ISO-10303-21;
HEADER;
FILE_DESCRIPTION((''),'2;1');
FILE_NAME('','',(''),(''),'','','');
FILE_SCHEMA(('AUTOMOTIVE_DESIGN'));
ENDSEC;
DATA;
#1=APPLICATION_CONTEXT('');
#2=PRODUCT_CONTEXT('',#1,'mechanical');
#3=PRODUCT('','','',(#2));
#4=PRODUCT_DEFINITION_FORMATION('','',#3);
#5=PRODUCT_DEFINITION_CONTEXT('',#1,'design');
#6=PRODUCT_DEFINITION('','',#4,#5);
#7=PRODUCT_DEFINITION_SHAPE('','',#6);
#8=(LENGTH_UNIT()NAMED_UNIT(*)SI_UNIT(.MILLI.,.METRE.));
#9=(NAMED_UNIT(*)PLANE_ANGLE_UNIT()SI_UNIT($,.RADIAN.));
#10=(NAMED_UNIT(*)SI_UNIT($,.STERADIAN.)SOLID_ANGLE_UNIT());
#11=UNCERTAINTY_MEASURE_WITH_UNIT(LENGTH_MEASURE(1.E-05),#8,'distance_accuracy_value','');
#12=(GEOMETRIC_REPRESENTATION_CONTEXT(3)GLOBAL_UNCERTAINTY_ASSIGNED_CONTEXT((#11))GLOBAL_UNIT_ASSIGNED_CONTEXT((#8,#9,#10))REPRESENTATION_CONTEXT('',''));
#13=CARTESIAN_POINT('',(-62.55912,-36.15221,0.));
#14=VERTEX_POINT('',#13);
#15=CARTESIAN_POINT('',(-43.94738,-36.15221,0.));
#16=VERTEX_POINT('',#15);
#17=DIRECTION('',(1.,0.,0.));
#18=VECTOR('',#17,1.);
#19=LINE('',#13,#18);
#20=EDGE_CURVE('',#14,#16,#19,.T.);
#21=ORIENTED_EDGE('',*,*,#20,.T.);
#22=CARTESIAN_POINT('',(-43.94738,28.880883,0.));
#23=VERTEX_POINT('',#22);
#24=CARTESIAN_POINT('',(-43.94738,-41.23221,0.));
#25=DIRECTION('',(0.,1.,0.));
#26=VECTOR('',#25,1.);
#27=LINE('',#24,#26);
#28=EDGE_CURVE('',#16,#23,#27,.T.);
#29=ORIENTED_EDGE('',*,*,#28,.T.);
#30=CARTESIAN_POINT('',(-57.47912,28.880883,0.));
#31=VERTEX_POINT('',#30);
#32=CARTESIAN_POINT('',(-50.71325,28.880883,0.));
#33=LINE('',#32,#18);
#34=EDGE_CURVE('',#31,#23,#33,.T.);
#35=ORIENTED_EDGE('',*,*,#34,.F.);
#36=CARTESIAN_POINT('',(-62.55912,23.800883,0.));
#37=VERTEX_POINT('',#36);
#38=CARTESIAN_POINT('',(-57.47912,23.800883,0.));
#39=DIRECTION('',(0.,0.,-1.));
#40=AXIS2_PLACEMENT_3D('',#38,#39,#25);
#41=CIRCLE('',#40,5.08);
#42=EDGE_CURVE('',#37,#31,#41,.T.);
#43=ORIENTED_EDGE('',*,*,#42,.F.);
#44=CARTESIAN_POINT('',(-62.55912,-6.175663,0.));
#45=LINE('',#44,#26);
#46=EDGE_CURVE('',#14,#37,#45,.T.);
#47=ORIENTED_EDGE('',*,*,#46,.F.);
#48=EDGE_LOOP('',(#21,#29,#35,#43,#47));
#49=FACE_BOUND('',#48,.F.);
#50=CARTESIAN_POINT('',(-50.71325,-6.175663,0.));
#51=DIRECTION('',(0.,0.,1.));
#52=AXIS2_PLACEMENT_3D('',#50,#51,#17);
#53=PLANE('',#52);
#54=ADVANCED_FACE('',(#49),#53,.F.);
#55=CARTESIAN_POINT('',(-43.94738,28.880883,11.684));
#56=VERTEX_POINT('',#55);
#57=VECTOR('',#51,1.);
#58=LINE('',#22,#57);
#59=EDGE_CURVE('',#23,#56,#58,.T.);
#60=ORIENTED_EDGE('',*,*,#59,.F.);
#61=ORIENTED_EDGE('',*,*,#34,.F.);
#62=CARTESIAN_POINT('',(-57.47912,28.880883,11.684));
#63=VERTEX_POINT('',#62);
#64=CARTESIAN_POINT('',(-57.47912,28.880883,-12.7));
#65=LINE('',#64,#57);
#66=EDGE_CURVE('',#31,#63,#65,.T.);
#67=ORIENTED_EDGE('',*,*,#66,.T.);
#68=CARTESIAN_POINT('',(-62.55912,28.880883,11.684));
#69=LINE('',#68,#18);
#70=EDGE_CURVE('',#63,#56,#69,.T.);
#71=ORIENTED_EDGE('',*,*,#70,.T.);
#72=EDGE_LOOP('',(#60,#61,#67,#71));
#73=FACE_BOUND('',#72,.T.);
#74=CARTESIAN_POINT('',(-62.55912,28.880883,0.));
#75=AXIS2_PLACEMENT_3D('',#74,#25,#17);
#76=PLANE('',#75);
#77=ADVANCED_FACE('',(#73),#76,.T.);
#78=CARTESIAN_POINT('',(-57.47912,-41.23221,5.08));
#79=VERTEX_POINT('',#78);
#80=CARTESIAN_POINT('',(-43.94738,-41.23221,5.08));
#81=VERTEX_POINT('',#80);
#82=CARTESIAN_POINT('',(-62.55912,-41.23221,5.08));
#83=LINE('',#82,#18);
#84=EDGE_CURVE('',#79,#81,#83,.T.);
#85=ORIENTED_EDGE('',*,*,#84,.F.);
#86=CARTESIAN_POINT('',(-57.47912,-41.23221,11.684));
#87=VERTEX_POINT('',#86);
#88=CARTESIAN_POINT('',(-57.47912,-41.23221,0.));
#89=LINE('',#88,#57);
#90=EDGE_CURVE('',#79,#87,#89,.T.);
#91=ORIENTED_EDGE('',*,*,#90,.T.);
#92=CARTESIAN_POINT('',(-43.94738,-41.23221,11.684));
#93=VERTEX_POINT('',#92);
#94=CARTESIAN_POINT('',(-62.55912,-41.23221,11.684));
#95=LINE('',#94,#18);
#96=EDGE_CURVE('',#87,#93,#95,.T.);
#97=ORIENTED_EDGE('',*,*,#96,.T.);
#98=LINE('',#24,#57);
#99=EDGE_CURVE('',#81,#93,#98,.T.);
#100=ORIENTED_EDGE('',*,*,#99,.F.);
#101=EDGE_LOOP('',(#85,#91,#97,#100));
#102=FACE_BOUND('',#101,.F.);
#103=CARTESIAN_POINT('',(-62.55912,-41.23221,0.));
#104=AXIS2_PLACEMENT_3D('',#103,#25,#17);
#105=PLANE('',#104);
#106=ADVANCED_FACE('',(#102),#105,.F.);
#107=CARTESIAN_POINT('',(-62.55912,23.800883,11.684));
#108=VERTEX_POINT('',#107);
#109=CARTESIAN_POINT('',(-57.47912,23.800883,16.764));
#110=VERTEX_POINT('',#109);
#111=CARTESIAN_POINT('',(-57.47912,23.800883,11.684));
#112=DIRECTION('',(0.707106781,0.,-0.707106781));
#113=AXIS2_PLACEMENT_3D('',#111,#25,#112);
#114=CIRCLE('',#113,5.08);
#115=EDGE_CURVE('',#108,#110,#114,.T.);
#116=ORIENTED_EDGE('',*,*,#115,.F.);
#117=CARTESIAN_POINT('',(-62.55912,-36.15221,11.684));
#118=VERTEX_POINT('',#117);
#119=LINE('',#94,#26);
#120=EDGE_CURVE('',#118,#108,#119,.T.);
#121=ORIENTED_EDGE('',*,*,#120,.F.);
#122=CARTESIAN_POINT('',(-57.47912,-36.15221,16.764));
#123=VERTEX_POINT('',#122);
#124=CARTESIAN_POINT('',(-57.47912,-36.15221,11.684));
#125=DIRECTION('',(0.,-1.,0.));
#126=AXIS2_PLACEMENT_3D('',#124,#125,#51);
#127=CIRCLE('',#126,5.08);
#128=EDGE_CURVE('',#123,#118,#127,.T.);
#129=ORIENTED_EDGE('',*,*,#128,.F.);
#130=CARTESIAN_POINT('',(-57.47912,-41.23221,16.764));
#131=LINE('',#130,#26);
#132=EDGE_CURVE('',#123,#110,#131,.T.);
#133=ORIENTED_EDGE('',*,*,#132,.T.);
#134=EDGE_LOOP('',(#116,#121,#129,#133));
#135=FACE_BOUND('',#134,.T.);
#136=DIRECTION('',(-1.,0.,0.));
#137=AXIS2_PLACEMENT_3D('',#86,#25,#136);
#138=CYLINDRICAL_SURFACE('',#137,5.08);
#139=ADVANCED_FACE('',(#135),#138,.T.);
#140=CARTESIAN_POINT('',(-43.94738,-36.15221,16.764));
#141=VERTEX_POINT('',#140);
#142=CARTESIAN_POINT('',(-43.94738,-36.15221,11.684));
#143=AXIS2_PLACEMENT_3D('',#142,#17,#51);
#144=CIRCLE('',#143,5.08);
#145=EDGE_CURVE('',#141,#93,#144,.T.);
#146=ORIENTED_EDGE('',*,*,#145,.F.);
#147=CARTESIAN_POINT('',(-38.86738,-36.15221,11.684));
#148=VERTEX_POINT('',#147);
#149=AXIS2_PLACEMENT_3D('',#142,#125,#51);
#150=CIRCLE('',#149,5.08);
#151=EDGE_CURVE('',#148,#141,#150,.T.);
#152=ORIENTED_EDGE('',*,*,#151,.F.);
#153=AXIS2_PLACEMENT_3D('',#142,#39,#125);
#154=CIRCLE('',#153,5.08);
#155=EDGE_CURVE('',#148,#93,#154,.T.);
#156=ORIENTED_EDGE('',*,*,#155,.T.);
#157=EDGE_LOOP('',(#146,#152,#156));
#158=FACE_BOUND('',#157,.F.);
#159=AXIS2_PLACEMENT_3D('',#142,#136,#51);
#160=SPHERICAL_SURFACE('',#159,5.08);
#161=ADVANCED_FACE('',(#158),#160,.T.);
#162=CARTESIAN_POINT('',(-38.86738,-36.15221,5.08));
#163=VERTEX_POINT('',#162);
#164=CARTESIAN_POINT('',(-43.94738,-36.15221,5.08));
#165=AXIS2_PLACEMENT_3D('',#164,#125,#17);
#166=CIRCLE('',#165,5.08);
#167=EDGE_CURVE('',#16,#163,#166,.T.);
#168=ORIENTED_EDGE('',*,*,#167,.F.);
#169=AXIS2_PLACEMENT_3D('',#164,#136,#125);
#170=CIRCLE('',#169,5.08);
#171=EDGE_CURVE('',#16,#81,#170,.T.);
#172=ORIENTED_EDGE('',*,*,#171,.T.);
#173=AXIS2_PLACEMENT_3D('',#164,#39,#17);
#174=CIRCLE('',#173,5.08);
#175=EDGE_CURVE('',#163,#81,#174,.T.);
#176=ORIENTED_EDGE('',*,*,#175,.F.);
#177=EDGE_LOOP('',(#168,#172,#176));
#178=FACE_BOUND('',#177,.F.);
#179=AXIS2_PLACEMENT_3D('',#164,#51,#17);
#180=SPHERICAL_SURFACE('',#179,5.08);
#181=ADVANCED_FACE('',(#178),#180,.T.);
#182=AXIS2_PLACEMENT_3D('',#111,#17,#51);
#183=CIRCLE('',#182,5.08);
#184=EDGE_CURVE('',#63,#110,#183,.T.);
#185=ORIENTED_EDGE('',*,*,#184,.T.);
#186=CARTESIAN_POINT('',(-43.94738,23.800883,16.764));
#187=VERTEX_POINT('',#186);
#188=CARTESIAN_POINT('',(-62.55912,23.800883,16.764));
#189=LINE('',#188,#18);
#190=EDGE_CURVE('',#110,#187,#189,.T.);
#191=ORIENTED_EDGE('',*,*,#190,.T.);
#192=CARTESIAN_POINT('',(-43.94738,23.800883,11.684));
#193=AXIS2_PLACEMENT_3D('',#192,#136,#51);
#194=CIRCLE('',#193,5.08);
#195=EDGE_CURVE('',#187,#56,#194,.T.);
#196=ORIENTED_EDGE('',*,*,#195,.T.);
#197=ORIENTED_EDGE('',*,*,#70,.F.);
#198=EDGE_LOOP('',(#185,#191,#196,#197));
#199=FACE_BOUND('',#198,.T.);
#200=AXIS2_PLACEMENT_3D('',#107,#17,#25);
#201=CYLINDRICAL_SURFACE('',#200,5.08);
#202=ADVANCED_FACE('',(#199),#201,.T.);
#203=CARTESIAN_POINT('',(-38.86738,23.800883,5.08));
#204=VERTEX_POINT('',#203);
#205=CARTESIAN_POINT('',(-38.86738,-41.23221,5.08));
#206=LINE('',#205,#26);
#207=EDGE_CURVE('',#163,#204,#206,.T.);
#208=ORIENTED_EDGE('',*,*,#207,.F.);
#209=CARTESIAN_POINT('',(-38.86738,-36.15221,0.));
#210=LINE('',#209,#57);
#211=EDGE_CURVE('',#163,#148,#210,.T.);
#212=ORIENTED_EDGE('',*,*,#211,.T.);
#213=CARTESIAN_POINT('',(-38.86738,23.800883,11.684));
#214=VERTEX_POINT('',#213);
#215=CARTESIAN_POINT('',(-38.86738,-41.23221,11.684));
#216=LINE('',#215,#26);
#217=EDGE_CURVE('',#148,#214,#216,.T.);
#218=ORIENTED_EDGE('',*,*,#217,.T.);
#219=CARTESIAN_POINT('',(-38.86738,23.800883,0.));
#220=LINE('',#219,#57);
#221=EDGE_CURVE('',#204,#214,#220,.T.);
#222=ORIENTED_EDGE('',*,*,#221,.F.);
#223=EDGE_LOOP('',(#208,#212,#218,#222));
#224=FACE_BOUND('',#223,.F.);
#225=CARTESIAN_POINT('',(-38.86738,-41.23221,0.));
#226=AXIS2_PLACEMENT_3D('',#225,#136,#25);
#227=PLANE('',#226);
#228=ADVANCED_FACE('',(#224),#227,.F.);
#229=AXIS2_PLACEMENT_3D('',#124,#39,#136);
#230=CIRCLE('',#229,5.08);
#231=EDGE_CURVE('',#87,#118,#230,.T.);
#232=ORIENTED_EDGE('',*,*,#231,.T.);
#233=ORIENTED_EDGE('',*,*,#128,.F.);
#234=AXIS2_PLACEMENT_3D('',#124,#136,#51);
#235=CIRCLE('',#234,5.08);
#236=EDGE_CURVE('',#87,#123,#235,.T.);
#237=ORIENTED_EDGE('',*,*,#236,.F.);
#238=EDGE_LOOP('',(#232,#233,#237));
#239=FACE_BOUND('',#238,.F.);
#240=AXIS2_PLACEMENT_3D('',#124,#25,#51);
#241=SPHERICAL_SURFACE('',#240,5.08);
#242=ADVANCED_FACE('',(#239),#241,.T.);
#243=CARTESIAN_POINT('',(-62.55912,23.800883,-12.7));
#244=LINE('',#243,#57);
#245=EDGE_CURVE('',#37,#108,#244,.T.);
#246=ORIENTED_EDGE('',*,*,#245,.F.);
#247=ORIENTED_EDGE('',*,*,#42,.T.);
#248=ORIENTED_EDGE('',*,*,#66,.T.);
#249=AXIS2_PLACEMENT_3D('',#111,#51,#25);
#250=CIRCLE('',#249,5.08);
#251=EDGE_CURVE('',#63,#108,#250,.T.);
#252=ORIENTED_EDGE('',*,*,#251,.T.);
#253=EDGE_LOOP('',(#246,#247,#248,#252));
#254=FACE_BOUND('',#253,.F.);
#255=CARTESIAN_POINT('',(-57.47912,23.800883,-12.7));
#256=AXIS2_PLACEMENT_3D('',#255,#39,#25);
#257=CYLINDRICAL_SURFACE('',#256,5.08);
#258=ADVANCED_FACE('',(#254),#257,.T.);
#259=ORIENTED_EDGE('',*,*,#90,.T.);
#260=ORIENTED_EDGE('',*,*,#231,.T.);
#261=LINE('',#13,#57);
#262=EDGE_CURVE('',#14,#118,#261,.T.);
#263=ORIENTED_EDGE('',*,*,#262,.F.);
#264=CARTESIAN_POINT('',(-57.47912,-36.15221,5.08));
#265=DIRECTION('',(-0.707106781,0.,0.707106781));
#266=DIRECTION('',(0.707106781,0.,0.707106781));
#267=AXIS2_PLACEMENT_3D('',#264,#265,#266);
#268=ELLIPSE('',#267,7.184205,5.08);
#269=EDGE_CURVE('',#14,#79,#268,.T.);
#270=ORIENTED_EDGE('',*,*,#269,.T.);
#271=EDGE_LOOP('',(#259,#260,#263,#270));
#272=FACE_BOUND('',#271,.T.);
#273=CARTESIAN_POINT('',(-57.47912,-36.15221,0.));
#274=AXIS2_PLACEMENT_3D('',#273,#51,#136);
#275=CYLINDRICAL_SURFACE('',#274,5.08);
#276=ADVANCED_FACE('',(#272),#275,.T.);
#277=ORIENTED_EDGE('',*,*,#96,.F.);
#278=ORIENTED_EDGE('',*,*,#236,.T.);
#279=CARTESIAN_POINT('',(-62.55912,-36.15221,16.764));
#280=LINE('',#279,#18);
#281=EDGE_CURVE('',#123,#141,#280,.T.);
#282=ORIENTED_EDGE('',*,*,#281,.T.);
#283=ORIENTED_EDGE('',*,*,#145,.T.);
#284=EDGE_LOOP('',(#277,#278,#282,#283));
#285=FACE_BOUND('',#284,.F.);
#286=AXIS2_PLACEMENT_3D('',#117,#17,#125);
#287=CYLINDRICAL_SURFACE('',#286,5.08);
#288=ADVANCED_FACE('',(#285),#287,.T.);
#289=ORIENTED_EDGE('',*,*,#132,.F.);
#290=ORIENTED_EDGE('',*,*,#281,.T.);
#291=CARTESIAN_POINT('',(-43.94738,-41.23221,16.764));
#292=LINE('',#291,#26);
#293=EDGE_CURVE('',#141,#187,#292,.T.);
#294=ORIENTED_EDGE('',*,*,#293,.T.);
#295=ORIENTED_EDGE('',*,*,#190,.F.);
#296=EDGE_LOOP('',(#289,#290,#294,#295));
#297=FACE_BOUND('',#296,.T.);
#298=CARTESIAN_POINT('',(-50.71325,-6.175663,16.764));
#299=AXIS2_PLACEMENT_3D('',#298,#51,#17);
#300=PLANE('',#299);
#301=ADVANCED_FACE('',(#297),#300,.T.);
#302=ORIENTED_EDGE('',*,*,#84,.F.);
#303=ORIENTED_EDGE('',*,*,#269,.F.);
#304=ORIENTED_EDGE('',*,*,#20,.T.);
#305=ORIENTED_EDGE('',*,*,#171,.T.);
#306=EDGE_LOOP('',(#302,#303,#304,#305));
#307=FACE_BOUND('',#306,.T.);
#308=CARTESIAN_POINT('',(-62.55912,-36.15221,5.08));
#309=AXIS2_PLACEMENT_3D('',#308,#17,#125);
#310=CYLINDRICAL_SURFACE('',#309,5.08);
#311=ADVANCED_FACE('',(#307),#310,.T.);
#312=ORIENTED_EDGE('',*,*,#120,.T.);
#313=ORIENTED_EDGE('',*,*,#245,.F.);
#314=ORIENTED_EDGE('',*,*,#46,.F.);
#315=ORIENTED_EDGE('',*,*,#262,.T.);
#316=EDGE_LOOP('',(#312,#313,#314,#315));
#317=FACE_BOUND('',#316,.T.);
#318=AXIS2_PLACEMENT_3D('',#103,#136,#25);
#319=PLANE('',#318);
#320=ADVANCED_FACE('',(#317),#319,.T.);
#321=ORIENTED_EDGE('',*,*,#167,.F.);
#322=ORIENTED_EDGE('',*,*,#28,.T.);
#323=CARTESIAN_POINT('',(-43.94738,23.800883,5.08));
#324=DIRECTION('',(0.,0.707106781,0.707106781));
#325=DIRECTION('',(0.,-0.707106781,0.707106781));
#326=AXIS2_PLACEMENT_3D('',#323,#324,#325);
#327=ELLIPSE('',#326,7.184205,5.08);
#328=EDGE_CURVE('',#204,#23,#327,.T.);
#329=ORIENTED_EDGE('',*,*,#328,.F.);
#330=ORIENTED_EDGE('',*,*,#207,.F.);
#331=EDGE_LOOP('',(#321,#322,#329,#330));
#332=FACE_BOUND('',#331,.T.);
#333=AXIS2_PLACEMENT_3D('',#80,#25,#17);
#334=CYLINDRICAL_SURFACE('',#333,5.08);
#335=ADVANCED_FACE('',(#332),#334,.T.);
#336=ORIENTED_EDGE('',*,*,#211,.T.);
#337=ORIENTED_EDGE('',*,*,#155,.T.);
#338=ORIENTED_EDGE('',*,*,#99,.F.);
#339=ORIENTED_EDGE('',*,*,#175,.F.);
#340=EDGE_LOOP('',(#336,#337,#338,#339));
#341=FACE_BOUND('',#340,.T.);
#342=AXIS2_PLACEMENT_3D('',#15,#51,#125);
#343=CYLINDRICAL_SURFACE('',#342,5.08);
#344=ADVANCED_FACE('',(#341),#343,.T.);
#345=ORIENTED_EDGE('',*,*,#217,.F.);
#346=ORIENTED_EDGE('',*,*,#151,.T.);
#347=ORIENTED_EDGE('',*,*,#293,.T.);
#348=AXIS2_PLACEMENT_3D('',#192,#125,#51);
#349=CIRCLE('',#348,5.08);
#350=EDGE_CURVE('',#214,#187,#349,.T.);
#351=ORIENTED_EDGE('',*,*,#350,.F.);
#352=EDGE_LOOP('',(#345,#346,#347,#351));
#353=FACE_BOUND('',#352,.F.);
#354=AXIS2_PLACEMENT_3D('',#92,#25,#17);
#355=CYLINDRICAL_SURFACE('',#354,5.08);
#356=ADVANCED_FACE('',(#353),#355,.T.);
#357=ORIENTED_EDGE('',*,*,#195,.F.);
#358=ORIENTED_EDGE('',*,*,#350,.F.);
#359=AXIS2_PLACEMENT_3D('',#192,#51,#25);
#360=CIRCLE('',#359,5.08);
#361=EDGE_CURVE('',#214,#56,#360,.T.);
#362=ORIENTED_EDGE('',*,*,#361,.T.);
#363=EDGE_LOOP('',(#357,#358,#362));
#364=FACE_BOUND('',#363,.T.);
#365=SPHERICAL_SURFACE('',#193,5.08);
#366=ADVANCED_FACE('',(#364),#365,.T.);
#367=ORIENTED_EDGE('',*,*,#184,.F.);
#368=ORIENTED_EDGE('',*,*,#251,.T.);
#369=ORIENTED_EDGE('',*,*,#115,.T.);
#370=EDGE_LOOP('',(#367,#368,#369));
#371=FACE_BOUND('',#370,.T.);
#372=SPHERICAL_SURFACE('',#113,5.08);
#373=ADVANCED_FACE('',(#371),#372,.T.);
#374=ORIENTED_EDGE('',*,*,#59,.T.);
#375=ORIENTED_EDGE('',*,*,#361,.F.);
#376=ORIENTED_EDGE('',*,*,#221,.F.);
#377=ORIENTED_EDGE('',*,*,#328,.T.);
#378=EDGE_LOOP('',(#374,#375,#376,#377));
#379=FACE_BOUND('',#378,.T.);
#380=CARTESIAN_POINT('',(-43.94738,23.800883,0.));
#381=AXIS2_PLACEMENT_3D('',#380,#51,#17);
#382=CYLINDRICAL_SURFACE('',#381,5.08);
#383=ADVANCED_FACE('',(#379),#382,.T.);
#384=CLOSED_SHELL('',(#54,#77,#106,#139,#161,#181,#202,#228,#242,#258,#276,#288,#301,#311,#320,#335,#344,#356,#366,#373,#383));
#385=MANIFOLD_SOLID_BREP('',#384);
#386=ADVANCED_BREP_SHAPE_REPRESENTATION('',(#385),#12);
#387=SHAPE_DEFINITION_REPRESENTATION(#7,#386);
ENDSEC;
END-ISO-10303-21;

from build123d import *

# Parameters (mm, degrees)
F0_W        = 23.691739887
F0_H        = 70.1130926609
F1_DEPTH    = 16.764
F2_R        = 5.08
F3_T1_DEPTH = 24.384
F3_S5_W     = 5.08
F3_S5_H     = 5.08
F3_T6_DEPTH = 5.08


# Not quite as in the source:
# - a fillet or chamfer that OpenCascade refuses, or shapes differently, is made with other operations: its cross-section is extruded or revolved along the edge and cut away or added


with BuildPart() as f1:
    # F0 (on Top) → F1 (new body)
    with BuildSketch(Plane.XY):
        with Locations((-50.7132504135, -6.1756633222)):
            Rectangle(F0_W, F0_H)
    extrude(amount=F1_DEPTH)

    # F2
    f2_edges = [f1.edges().sort_by_distance(p)[0] for p in [
        (-50.71325, 28.880883, 16.764),
        (-62.55912, -6.175663, 16.764),
        (-50.71325, -41.23221, 16.764),
        (-38.86738, -6.175663, 16.764),
        (-38.86738, -41.23221, 8.382),
        (-38.86738, 28.880883, 8.382),
        (-38.86738, -6.175663, 0),
        (-62.55912, -41.23221, 8.382),
        (-50.71325, -41.23221, 0),
    ]]
    fillet(f2_edges, radius=F2_R)

    # F3: fillet of radius 5.08 on 1 edges, made by hand

    # F3_s2 → F3_t1 (cut)
    with BuildSketch(Plane.XY.offset(-12.7)):
        with BuildLine():
            ThreePointArc((-57.479120357, 28.8808830082), (-61.0712228055, 27.3929854567), (-62.559120357, 23.8008830082))
            Line((-62.559120357, 23.8008830082), (-62.559120357, 28.8808830082))
            Line((-62.559120357, 28.8808830082), (-57.479120357, 28.8808830082))
        make_face()
    extrude(amount=F3_T1_DEPTH, mode=Mode.SUBTRACT)


with BuildPart() as f3_tool4:
    # F3_s5 → F3_t6 (new body)
    with BuildSketch(Plane.XZ.offset(-23.8008830082)):
        with Locations((-60.019120357, 14.224)):
            Rectangle(F3_S5_W, F3_S5_H)
    extrude(amount=-F3_T6_DEPTH)

    # F3_s7 → F3_t8 (revolve, cut)
    with BuildSketch(Plane(origin=(-57.479120357, 23.8008830082, 11.684), x_dir=(0.7071067812, 0, -0.7071067812), z_dir=(0.7071067812, 0, 0.7071067812))):
        with BuildLine():
            ThreePointArc((0, -5.08), (5.08, 0), (0, 5.08))
            Line((0, 5.08), (0, -5.08))
        make_face()
    revolve(axis=Axis((-57.479120357, 23.8008830082, 11.684), (0, 1, 0)), mode=Mode.SUBTRACT)


with BuildPart() as f1_1:
    add(f1.part)

    # F3_t3: cut F3_tool4
    add(f3_tool4.part, mode=Mode.SUBTRACT)


solid = f1_1.part
